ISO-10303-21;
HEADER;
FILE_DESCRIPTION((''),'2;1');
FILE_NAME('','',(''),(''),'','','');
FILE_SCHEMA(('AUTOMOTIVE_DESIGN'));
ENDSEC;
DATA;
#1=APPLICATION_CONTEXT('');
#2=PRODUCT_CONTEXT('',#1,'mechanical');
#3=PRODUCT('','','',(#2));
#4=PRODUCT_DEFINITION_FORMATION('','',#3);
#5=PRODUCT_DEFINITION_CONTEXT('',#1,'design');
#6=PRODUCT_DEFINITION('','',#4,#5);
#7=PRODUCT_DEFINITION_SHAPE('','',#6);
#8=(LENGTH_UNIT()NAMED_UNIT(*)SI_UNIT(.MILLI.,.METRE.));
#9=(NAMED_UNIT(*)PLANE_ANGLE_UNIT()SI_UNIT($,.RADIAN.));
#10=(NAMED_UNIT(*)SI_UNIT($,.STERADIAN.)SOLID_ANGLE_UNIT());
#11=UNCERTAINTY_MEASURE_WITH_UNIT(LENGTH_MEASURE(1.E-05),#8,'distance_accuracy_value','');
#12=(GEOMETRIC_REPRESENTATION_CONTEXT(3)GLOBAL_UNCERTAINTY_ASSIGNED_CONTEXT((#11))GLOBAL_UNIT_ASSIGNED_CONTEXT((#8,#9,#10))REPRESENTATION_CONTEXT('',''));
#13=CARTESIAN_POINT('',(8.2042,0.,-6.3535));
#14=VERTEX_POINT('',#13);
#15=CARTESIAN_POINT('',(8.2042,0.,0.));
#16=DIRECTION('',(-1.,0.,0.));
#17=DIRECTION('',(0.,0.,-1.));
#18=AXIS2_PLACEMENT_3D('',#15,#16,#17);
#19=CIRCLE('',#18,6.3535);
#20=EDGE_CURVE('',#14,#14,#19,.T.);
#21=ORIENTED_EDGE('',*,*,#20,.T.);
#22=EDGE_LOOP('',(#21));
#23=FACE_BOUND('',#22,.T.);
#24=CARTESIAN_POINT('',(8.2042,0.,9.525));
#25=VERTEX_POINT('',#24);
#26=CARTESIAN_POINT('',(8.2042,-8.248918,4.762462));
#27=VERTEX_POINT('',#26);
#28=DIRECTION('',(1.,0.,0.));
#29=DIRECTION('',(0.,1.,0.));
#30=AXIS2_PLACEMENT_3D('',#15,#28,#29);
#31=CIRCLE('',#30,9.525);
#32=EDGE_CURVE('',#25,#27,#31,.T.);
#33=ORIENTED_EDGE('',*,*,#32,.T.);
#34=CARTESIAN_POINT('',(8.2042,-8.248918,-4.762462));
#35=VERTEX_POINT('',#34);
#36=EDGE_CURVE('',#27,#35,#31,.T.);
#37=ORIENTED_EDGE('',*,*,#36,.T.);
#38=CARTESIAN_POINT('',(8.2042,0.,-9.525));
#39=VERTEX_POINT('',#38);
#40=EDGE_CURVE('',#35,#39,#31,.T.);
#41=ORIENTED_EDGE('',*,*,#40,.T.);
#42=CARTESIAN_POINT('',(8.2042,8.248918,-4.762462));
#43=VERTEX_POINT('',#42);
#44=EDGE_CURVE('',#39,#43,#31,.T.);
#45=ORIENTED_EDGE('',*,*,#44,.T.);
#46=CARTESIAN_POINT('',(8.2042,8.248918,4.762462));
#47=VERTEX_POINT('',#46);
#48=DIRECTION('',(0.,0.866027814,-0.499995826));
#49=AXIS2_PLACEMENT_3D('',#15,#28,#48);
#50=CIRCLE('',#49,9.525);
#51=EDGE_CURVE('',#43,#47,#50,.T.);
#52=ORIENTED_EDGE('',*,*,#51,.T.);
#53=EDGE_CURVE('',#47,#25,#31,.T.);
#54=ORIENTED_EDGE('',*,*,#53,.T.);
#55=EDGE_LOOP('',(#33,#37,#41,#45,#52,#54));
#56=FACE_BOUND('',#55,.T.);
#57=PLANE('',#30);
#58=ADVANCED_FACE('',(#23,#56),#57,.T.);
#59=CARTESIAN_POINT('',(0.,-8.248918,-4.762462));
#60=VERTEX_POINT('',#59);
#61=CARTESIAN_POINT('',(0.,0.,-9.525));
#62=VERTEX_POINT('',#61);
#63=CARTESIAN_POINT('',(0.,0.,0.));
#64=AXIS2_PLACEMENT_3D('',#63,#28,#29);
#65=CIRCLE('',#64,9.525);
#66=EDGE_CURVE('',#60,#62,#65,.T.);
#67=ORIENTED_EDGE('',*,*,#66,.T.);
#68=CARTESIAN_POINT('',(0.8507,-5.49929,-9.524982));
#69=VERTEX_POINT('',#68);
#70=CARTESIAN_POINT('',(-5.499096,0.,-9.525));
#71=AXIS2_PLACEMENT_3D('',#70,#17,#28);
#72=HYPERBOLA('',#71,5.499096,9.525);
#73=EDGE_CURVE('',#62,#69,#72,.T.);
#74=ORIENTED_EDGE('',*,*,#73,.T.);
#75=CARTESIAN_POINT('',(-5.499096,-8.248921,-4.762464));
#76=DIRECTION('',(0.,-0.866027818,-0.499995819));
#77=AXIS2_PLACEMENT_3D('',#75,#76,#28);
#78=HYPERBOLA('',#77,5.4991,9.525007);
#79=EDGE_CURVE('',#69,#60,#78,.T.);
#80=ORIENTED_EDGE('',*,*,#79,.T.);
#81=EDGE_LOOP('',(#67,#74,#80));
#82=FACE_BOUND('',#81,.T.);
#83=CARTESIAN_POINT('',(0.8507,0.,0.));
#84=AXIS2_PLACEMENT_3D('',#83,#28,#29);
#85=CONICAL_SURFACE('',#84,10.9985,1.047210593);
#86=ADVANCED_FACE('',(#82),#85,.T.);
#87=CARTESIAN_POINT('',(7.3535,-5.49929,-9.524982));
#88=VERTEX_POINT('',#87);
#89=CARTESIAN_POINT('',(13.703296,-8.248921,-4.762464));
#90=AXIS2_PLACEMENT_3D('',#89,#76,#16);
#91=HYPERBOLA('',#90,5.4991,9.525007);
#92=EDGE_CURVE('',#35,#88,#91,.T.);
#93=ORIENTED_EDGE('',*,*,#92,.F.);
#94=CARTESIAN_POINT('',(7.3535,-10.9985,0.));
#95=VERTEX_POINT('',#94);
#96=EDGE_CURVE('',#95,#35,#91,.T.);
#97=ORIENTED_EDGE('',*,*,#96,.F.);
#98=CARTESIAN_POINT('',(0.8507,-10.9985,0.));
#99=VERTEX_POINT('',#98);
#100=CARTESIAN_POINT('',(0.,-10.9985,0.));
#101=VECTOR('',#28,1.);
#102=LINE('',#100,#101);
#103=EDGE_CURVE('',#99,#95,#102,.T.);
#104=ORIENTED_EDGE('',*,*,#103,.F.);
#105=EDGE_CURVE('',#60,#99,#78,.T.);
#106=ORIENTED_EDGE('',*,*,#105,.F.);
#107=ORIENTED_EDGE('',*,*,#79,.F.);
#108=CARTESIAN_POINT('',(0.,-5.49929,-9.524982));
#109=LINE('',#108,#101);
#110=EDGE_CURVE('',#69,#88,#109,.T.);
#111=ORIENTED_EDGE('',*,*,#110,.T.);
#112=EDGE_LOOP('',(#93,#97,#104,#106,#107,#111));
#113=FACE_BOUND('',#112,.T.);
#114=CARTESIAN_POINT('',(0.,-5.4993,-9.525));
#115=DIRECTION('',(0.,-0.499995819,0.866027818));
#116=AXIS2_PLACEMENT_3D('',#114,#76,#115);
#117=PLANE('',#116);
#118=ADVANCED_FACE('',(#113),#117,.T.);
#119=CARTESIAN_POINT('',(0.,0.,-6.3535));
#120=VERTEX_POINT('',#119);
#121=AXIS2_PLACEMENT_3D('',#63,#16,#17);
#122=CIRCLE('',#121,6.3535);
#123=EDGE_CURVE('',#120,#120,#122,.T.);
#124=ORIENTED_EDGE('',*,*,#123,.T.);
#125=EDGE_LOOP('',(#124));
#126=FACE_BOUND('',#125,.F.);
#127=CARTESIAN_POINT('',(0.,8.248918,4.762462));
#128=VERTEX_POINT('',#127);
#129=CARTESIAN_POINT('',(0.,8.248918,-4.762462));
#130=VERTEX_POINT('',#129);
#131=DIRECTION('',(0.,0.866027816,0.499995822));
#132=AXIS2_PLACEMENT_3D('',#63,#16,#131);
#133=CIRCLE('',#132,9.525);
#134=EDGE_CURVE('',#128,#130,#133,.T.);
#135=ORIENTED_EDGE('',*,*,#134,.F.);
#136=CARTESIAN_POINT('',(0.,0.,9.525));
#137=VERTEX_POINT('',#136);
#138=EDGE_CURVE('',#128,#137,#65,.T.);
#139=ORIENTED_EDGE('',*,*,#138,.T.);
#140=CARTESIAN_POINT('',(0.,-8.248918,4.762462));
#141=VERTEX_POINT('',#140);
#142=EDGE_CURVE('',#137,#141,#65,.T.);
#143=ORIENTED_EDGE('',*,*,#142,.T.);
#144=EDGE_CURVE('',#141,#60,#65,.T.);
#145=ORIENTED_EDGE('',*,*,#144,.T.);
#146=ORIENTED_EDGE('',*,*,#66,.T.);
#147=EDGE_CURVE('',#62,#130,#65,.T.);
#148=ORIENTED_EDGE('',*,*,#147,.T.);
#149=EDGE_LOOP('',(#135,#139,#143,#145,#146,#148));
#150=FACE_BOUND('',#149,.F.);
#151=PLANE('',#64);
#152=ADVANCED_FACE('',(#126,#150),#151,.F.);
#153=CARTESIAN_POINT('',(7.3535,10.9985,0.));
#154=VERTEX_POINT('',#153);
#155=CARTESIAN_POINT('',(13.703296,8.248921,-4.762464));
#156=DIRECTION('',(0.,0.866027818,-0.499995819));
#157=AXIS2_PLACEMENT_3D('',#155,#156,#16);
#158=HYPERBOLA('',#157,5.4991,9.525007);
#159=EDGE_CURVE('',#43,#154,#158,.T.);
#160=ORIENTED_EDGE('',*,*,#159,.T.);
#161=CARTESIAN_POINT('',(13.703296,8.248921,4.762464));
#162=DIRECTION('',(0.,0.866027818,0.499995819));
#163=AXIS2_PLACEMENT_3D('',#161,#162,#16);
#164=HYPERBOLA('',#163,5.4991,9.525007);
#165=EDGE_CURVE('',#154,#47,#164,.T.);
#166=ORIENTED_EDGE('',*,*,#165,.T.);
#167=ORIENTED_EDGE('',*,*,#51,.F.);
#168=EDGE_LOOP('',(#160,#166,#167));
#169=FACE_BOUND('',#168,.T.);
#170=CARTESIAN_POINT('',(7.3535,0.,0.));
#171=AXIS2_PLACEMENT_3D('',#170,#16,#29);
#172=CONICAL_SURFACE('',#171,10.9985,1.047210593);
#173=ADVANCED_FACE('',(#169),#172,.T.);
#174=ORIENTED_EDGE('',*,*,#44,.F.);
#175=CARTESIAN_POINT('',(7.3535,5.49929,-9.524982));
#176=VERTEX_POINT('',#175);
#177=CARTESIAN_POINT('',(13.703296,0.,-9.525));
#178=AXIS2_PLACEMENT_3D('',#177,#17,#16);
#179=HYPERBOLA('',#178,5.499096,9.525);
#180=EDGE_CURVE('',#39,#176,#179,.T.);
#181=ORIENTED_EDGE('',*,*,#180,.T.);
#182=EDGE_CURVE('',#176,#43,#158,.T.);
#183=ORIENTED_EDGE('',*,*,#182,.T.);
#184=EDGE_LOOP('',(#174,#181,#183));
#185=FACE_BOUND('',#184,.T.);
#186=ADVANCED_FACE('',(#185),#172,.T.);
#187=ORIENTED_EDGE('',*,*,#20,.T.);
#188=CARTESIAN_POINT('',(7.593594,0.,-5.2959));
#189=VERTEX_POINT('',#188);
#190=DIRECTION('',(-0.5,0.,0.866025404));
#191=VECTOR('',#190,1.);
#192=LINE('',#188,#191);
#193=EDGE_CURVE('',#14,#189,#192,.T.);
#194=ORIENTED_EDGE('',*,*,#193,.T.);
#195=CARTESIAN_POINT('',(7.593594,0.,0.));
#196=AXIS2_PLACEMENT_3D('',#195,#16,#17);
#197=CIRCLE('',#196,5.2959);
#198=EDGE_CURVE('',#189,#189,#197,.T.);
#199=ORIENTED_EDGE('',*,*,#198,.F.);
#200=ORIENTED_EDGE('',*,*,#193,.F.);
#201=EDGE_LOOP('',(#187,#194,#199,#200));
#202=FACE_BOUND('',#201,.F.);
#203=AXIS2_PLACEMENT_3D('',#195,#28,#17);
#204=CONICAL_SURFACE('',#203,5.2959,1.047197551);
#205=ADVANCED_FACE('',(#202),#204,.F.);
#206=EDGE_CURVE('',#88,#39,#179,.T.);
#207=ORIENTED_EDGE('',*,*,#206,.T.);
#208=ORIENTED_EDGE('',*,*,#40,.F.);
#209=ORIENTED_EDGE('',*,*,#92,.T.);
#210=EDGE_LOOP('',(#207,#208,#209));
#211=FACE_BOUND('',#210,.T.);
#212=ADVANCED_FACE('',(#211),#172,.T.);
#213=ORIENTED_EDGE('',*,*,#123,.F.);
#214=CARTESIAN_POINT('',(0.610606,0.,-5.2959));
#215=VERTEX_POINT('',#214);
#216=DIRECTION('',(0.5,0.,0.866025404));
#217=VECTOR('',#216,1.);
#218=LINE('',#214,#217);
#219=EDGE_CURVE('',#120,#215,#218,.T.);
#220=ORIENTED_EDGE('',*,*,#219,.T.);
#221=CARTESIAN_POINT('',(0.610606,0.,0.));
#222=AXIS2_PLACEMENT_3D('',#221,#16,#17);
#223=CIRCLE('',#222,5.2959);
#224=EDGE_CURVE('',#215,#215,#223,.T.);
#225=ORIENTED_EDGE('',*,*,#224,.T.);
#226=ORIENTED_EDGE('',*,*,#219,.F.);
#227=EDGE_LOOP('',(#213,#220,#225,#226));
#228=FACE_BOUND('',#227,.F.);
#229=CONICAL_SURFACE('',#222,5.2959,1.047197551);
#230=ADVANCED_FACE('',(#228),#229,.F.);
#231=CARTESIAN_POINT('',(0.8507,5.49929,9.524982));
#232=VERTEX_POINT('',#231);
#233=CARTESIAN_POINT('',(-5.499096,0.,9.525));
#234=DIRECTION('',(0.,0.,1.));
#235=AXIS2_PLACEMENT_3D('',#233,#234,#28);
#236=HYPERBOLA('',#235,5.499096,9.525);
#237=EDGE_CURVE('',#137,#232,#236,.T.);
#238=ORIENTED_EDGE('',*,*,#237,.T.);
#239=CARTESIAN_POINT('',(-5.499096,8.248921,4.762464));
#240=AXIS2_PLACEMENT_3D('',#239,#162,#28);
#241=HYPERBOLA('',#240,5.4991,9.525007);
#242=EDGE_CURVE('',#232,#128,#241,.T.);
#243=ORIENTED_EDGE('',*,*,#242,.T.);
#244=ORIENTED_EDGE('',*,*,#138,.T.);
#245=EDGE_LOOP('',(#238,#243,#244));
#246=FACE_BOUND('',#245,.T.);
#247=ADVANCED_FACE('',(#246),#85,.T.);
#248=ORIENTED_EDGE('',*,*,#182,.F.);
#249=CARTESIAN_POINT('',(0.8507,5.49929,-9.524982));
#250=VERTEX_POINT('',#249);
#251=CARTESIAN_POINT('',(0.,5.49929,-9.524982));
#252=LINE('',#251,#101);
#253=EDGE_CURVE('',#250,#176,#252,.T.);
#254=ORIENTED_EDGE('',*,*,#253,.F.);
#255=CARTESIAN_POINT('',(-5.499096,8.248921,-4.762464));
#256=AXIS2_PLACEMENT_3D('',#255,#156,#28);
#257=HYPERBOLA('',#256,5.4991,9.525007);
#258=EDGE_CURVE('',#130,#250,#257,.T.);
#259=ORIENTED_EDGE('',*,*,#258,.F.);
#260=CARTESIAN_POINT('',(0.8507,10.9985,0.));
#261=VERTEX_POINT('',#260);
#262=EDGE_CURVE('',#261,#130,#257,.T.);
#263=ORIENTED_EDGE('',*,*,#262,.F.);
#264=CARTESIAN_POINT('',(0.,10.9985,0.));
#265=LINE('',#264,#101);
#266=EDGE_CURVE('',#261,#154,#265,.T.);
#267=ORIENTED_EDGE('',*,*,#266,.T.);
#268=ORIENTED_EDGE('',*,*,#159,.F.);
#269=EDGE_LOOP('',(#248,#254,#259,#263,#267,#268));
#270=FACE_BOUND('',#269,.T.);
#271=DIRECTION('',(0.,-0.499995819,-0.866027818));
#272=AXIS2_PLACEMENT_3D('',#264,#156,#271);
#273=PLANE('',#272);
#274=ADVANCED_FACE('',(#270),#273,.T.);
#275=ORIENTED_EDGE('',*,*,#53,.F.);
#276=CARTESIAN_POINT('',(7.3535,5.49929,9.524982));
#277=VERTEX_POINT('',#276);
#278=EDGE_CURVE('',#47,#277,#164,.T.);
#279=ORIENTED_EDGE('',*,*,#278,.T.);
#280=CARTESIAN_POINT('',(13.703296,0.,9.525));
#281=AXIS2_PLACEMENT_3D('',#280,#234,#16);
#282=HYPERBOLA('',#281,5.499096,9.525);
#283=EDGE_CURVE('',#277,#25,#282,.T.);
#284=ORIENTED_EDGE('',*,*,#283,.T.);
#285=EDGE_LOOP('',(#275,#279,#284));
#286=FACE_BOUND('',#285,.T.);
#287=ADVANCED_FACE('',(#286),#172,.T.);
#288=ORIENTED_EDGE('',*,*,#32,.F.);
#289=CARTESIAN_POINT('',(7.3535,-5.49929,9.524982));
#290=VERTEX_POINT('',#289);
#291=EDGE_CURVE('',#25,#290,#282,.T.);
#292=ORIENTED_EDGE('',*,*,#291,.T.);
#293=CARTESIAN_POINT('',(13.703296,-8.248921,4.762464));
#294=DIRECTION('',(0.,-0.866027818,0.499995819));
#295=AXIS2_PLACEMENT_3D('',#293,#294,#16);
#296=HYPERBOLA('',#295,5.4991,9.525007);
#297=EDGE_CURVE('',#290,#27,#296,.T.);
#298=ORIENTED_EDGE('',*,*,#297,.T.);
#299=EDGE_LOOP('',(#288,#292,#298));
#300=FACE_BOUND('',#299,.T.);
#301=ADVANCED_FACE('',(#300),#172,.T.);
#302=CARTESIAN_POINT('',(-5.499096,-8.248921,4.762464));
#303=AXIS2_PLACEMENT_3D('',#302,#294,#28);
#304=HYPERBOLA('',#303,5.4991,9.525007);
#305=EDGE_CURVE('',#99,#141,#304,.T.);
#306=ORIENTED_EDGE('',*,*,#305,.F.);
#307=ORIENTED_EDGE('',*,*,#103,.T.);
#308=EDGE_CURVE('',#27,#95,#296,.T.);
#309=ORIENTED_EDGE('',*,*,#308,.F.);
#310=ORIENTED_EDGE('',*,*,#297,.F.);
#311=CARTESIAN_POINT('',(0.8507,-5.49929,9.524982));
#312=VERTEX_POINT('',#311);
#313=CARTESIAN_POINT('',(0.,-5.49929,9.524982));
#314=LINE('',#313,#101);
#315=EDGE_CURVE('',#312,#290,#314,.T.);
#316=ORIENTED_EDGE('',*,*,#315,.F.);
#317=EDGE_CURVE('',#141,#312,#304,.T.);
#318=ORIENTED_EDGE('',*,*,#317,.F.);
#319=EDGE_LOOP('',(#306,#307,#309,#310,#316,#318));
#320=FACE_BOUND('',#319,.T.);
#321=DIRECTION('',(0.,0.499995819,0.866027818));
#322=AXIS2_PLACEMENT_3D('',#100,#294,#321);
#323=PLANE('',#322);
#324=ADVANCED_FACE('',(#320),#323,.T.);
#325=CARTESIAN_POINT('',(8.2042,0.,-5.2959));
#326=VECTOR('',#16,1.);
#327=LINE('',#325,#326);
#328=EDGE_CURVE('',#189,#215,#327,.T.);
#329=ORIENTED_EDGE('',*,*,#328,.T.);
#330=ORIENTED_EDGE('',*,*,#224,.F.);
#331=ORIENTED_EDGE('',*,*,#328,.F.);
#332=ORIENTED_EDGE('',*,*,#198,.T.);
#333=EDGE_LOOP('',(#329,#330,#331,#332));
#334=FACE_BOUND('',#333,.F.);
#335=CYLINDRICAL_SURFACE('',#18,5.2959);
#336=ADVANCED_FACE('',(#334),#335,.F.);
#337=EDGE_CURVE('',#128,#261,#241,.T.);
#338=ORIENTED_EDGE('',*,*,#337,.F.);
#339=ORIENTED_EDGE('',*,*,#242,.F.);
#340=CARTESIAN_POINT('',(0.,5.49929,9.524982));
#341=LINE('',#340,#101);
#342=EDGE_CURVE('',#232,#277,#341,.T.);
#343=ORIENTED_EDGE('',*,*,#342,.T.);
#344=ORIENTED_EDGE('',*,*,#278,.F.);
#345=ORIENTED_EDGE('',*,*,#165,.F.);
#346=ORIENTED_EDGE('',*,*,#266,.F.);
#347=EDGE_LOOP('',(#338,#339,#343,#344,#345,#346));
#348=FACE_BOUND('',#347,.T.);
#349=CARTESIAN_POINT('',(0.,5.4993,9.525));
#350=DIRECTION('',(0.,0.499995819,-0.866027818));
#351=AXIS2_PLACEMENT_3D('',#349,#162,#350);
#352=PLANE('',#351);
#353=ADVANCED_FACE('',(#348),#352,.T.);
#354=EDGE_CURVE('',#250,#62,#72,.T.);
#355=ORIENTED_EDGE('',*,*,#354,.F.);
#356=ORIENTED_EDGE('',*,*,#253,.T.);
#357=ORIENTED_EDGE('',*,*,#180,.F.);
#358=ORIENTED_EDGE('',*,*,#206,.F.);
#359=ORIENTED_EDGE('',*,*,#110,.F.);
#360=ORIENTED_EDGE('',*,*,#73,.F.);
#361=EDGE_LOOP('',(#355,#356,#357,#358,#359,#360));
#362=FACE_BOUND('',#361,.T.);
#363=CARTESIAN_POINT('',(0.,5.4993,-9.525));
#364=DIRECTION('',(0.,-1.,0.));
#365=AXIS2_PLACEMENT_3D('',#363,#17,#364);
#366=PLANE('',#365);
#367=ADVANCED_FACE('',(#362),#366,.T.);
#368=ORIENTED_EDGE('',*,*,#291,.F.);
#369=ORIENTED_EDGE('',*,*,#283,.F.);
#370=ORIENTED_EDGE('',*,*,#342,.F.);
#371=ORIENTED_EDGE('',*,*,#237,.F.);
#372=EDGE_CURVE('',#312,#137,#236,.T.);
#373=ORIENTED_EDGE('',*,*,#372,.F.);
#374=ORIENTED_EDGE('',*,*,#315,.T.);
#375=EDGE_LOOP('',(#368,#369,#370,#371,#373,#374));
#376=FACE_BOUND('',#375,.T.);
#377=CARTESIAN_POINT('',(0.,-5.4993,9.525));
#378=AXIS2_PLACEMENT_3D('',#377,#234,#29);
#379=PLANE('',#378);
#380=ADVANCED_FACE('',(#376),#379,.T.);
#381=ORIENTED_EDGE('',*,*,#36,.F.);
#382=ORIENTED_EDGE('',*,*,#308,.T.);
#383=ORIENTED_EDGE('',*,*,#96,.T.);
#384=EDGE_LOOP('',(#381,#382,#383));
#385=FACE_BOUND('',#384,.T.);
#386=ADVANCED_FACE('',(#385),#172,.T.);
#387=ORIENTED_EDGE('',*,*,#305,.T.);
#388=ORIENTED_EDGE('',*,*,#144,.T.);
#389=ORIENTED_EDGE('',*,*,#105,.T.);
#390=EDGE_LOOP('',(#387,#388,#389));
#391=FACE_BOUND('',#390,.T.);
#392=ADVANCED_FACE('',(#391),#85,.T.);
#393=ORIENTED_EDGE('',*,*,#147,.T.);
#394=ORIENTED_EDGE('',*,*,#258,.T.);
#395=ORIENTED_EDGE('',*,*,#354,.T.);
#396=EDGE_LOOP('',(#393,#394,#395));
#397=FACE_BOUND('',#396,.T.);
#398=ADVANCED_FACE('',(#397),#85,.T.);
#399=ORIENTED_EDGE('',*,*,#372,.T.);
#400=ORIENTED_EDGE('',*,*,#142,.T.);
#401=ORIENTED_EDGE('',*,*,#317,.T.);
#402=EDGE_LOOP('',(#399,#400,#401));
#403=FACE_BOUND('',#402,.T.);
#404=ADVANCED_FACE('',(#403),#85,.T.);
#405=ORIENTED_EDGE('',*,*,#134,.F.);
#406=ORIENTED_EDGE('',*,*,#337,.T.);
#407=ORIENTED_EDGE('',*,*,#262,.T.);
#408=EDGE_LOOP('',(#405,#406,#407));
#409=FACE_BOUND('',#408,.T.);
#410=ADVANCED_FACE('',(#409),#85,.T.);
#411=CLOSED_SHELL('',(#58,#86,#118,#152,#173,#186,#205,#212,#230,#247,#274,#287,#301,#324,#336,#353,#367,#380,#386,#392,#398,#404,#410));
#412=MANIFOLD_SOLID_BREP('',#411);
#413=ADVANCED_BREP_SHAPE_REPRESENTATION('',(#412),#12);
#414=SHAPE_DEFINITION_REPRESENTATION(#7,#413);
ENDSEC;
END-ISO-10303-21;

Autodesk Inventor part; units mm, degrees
ref_plane "YZ Plane" through (0, 0, 0) normal (1, 0, 0) x (0, 1, 0)
ref_plane "XZ Plane" through (0, 0, 0) normal (0, 1, 0) x (-1, 0, 0)
sketch "Sketch1" plane through (0, 0, 0) normal (1, 0, 0) x (0, 1, 0)
  line L0 (-10.9985, 0) -> (-5.4993, 9.525)
  line L1 (-5.4993, 9.525) -> (5.4993, 9.525)
  line L2 (5.4993, 9.525) -> (10.9985, 0)
  line L3 (10.9985, 0) -> (5.4993, -9.525)
  line L4 (5.4993, -9.525) -> (-5.4993, -9.525)
  line L5 (-5.4993, -9.525) -> (-10.9985, 0)
  point P0 (0, 0)
  point P1 (0, 0)
  dimension "d0" = 21.9971
extrude "Body" add sketch "Sketch1" along normal blind 8.2042
sketch "Sketch2" plane through (0, 0, 0) normal (0, 0, 1) x (1, 0, 0)
  line L0 (0, 5.4993) -> (0, 10.9985) projected
  line L1 (0, 10.9985) -> (8.2042, 10.9985) projected
  line L2 (8.2042, 5.4993) -> (8.2042, 10.9985) projected
  line L3 (-1.6408, 0) -> (9.845, 0) projected
  line L4 (0.8507, 10.9985) -> (0, 9.525)
  line L5 (7.3535, 10.9985) -> (8.2042, 9.525)
  dimension "d3" = 30
  dimension "d4" = 30
  dimension "d5" = 19.05
  dimension "d6" = 19.05
revolve "Chamfer1" cut sketch "Sketch2" angle 360 about axis through (-10, 0, 0) along (1, 0, 0)
sketch "Sketch3" plane through (8.2042, 0, 0) normal (1, 0, 0) x (0, 0, -1)
  arc A0 (-4.7625, -8.2489) -> (4.7625, -8.2489) centre (0, 0) ccw projected
hole "Thread" at (8.2042, 0, 0) direction (-1, 0, 0) diameter 10.5918 end through all thread size "1/2-13 UNC" class "2B" standard "ANSI Unified Screw Threads"
chamfer "Chamfer2" distance 1.0576 angle 30 1 edges at (8.2042, 0, 5.2959) measured on face at (8.2042, -8.0676, -0.2128)
chamfer "Chamfer3" distance 1.0576 angle 30 1 edges at (0, 0, 5.2959) measured on face at (0, -8.0676, -0.2128)
ref_plane "Work Plane1" through (-22.0296, 0, 0) normal (0, -0.8660254, -0.5) x (1, 0, 0)
equation "\"d0\" = 1.1547 * SW"
equation "\"d1\" = KOH"
equation "\"d3\" = ANG1"
equation "\"d4\" = ANG2"
equation "\"d5\" = SW0"
equation "\"d6\" = SW01"
equation "\"d8\" = -0.5 * GD1 + 0.5 * NND"
equation "\"d40\" = -0.5 * GD1 + 0.5 * NND"
equation "\"d10\" = -0.5 * GD1 + 0.5 * NND"
equation "\"d41\" = -0.5 * GD1 + 0.5 * NND"
equation "\"ANG1\" = 30deg"
equation "\"ANG2\" = 30deg"
equation "\"NND\" = 12.7"
equation "\"KOH\" = 8.2042"
equation "\"SW\" = 19.05"
equation "\"SW0\" = SW"
equation "\"SW01\" = SW"
equation "\"THREADDIA\" = 12.7"
equation "\"TOA\" = 30deg"
equation "\"E0\" = 1.155 * SW"
equation "\"GD1\" = 10.584899"
properties part number "AS 2465 - 1/2  UNC" material "Steel, Mild"
